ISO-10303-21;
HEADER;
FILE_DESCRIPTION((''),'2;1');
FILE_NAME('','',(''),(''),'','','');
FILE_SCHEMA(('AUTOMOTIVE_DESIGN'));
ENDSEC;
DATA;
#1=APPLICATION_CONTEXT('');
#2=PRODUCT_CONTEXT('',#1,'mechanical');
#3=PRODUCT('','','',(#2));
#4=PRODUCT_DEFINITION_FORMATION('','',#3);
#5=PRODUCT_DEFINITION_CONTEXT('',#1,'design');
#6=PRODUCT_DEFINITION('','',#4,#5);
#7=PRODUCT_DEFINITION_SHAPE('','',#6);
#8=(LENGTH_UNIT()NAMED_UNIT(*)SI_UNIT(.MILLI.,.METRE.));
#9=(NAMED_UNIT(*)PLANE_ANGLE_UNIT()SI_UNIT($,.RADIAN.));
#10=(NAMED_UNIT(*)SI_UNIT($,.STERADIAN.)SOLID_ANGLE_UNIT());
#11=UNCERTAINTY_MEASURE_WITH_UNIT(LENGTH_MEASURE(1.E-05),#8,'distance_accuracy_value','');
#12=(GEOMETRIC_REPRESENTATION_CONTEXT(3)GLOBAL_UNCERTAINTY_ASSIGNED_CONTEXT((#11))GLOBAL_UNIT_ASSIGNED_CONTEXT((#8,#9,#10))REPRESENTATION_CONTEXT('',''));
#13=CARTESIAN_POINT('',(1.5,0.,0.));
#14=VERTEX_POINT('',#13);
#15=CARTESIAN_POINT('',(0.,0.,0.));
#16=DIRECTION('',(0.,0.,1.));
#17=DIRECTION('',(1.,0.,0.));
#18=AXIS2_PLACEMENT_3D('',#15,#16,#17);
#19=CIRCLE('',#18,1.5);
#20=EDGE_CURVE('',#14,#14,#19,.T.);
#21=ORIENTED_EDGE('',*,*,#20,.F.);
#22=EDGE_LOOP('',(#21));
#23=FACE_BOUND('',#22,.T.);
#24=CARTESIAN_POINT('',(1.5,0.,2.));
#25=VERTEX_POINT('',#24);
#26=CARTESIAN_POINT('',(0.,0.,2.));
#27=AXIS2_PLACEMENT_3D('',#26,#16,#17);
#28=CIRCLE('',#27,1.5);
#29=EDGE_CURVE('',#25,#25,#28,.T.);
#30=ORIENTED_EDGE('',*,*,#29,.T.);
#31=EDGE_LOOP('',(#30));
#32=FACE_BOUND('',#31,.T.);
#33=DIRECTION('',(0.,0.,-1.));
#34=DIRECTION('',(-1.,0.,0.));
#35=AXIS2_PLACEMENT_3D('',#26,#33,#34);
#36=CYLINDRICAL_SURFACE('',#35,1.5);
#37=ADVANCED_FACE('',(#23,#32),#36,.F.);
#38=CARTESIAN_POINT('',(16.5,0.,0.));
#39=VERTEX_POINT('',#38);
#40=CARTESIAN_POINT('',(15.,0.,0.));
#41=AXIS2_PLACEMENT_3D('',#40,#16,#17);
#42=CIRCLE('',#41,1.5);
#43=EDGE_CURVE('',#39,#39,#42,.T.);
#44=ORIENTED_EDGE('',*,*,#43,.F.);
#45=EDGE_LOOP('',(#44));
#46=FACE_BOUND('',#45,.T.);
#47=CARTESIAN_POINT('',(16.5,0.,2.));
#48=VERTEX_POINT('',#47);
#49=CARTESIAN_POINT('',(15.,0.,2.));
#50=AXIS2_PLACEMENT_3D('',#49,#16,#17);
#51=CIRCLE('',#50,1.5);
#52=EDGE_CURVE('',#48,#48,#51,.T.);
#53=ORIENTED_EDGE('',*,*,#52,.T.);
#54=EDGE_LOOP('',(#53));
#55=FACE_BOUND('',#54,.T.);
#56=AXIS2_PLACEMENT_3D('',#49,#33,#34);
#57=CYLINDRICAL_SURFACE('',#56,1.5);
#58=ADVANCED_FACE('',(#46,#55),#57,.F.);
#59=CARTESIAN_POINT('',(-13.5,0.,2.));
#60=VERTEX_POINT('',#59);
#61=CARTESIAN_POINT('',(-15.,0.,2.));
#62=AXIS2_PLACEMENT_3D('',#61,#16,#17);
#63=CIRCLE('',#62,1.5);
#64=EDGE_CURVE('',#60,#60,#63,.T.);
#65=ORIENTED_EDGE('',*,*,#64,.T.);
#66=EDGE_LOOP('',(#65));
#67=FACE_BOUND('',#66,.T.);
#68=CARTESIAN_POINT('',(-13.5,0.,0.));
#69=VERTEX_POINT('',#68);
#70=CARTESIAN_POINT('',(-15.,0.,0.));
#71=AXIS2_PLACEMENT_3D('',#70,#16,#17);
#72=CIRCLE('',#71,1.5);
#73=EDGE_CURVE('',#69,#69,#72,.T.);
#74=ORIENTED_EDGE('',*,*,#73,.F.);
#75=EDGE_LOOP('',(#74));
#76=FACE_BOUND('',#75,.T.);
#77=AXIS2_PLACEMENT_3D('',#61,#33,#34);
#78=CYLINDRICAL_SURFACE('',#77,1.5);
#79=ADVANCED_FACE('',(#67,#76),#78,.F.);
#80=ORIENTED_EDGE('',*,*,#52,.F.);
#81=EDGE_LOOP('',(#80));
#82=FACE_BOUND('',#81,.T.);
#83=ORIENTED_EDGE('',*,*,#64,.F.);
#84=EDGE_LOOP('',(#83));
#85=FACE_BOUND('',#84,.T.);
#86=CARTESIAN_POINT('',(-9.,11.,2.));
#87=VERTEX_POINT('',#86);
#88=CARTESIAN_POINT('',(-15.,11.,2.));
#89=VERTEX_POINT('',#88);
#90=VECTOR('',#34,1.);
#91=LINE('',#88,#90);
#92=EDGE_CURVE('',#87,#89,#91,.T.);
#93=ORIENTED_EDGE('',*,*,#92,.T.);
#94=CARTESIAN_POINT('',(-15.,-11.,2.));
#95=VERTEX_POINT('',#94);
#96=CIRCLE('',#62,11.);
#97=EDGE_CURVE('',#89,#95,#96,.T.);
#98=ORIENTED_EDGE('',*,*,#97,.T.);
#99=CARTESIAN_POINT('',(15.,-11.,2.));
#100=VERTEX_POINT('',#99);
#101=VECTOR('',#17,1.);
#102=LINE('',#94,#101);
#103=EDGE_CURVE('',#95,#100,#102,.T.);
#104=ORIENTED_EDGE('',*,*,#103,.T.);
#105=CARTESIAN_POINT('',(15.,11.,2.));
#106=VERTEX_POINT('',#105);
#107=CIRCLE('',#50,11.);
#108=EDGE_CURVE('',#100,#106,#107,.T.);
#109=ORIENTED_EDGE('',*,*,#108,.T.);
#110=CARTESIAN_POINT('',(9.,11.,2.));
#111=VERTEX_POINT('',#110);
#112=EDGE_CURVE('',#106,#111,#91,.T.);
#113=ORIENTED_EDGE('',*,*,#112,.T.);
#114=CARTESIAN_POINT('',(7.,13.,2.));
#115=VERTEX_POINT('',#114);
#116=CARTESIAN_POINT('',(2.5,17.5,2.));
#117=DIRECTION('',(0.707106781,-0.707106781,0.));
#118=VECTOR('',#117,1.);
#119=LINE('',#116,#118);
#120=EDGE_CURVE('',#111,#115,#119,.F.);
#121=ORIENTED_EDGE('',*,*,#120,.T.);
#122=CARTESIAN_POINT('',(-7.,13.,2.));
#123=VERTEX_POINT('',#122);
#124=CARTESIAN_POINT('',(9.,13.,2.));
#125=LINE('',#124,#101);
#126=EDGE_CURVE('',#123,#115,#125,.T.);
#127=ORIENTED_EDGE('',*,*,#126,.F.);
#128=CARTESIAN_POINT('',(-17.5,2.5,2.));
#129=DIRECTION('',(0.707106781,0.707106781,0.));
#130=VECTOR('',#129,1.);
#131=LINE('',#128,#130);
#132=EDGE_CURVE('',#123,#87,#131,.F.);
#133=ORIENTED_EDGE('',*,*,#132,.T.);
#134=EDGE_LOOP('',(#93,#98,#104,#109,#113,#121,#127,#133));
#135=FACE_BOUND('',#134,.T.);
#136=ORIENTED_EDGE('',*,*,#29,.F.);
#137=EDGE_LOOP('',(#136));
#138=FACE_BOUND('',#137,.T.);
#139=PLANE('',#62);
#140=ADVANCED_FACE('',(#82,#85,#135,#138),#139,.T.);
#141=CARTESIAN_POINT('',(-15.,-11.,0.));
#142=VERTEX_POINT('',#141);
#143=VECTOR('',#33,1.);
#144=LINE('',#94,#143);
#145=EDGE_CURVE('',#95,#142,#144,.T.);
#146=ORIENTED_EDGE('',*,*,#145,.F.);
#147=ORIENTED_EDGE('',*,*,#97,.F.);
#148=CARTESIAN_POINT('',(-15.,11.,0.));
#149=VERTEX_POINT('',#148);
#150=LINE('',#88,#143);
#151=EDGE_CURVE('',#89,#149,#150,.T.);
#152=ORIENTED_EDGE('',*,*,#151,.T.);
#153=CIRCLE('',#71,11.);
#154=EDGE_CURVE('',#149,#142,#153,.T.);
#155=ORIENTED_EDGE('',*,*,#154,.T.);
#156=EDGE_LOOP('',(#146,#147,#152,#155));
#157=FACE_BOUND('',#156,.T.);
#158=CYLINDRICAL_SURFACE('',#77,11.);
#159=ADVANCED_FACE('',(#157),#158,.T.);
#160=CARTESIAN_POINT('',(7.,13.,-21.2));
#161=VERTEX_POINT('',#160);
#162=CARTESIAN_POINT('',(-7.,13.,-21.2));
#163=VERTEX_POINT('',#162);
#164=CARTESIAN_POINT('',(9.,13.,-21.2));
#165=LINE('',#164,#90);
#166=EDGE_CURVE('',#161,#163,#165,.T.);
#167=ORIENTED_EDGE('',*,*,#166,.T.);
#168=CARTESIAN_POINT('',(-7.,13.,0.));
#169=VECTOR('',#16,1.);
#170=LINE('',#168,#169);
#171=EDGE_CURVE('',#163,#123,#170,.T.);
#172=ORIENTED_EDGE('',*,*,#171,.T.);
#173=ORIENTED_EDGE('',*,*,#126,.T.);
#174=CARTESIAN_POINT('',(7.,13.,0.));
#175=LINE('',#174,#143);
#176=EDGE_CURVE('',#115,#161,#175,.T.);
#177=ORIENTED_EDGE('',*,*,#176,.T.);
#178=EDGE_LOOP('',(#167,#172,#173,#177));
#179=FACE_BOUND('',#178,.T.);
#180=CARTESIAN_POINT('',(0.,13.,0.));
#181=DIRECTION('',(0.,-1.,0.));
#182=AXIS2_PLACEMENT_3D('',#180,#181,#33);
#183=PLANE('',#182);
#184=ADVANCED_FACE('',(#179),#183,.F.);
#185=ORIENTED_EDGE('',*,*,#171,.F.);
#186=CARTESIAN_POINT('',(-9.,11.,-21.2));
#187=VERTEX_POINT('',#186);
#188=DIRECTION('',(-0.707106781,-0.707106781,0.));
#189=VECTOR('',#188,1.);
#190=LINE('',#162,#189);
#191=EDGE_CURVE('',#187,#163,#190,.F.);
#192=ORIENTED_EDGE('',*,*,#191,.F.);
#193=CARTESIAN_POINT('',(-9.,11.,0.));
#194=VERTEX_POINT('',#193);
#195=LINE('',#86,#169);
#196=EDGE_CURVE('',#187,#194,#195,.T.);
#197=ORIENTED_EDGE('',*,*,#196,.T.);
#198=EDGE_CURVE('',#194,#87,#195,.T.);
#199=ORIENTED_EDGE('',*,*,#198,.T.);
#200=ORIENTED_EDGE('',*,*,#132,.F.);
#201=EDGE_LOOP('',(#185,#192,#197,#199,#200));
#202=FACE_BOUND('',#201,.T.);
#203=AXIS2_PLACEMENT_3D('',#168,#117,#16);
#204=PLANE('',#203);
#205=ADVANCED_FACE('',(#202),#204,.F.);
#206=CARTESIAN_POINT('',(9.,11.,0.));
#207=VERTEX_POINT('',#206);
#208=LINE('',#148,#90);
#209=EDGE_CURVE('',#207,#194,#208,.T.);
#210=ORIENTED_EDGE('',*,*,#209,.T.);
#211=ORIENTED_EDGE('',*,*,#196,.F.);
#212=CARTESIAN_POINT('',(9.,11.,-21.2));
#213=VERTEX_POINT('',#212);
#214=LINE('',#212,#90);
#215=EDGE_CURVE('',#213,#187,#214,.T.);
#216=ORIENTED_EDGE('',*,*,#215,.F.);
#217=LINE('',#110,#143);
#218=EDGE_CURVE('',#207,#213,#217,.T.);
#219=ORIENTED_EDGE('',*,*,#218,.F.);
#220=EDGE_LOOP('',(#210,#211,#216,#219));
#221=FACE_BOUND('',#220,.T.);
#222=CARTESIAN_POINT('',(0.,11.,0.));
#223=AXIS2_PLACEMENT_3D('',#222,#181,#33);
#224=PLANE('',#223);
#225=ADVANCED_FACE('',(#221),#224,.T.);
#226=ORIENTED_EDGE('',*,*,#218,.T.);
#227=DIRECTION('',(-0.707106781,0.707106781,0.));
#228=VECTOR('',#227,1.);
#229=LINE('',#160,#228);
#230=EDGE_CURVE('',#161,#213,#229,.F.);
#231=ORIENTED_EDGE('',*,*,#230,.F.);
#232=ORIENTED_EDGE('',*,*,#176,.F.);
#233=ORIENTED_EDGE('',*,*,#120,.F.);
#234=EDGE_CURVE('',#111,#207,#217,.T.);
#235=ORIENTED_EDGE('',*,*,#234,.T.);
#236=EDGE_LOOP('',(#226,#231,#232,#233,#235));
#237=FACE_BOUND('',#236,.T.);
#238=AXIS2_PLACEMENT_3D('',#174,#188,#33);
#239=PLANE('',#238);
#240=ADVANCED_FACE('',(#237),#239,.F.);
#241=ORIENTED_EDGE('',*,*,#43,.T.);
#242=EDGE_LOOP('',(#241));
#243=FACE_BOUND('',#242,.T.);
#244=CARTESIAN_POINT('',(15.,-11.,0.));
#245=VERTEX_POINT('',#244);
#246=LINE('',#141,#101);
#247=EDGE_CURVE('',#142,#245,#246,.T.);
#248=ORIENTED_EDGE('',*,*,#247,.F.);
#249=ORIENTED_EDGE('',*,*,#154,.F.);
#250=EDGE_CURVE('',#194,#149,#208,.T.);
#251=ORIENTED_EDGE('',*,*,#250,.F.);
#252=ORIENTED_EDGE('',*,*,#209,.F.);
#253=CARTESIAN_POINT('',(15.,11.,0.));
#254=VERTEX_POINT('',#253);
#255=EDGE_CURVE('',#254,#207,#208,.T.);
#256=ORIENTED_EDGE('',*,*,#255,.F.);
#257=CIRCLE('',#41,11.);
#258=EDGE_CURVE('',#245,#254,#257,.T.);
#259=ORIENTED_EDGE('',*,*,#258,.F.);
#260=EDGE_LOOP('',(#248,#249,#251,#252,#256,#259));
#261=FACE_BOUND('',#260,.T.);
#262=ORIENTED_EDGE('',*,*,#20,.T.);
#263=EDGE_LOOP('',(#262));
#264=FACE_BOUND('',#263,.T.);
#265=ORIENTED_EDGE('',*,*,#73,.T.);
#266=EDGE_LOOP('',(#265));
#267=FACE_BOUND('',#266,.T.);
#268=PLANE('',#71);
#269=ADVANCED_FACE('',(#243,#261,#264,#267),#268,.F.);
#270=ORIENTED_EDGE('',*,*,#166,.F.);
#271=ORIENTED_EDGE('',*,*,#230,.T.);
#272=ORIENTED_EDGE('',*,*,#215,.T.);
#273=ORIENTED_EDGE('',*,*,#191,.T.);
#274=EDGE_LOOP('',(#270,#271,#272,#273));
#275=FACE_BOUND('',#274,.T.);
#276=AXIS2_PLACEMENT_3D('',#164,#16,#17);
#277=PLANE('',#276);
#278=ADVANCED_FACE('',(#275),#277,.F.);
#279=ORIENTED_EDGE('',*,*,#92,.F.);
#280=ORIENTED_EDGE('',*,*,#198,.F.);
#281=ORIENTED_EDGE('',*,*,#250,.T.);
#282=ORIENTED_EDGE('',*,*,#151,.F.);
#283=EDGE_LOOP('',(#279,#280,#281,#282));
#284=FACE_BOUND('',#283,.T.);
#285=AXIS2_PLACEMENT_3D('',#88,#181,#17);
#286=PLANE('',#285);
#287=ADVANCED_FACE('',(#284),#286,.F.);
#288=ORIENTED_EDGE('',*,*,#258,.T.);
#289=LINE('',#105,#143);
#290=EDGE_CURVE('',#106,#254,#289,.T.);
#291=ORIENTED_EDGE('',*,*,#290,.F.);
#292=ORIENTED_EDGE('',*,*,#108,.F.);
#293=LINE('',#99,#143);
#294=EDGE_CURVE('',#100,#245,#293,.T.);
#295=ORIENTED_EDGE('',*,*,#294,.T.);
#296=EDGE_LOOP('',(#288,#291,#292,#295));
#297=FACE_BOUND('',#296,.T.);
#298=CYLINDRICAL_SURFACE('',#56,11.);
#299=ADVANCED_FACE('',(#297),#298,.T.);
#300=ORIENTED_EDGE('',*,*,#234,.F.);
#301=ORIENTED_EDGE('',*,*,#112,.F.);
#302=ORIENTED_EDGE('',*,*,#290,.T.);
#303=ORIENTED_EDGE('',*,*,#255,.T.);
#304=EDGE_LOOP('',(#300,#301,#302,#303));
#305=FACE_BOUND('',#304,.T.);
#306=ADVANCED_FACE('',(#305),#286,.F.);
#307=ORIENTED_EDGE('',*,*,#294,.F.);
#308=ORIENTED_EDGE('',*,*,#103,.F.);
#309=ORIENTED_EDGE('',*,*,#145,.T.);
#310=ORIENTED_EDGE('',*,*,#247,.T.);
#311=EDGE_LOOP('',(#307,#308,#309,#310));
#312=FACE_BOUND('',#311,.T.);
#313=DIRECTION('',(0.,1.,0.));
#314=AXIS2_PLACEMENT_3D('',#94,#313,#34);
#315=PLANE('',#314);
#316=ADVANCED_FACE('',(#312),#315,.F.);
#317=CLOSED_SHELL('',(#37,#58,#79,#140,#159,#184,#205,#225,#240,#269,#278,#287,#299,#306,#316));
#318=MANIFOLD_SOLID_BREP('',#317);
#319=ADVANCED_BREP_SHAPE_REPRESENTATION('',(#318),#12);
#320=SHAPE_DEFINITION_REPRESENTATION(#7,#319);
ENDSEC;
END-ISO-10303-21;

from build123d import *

# Parameters (mm, degrees)
SKETCH1_R           = 1.5
BOSS_EXTRUDE1_DEPTH = 2
SKETCH2_W           = 18
SKETCH2_H           = 23.2
BOSS_EXTRUDE2_DEPTH = 2
CHAMFER1_SIZE       = 2


with BuildPart() as part:
    # Sketch1 → Boss-Extrude1 (new body)
    with BuildSketch(Plane.XY):
        with BuildLine():
            Line((-15, 11), (15, 11))
            ThreePointArc((15, 11), (26, 0), (15, -11))
            Line((15, -11), (-15, -11))
            ThreePointArc((-15, -11), (-26, 0), (-15, 11))
        make_face()
        with Locations((-15, 0)):
            Circle(SKETCH1_R, mode=Mode.SUBTRACT)
        with Locations((15, 0)):
            Circle(SKETCH1_R, mode=Mode.SUBTRACT)
        Circle(SKETCH1_R, mode=Mode.SUBTRACT)
    extrude(amount=BOSS_EXTRUDE1_DEPTH)

    # Sketch2 → Boss-Extrude2 (add)
    with BuildSketch(Plane(origin=(0, 11, 0), x_dir=(1, 0, 0), z_dir=(0, 1, 0))):
        with Locations((0, 9.6)):
            Rectangle(SKETCH2_W, SKETCH2_H)
    extrude(amount=BOSS_EXTRUDE2_DEPTH)

    # Chamfer1
    # the kernel refuses this chamfer: 2 mm, written as the material it takes off along each edge
    with BuildSketch(Plane(origin=(-9, 13, -26.343365976), x_dir=(-0.027495876610586487, -0.9996219169112968, 0), z_dir=(0, 0, 1)), Plane(origin=(9, 13, 7.143365976), x_dir=(0.027495876610586487, -0.9996219169112968, 0), z_dir=(0, 0, -1))) as chamfer1_piece_1:
        Polygon((CHAMFER1_SIZE * 0.999621916911, CHAMFER1_SIZE * 0.0274958766106), (-CHAMFER1_SIZE * 0.0274958766106, CHAMFER1_SIZE * 0.999621916911), (0, 0), align=None)
    extrude(amount=33.486731952, mode=Mode.SUBTRACT)


solid = part.part
